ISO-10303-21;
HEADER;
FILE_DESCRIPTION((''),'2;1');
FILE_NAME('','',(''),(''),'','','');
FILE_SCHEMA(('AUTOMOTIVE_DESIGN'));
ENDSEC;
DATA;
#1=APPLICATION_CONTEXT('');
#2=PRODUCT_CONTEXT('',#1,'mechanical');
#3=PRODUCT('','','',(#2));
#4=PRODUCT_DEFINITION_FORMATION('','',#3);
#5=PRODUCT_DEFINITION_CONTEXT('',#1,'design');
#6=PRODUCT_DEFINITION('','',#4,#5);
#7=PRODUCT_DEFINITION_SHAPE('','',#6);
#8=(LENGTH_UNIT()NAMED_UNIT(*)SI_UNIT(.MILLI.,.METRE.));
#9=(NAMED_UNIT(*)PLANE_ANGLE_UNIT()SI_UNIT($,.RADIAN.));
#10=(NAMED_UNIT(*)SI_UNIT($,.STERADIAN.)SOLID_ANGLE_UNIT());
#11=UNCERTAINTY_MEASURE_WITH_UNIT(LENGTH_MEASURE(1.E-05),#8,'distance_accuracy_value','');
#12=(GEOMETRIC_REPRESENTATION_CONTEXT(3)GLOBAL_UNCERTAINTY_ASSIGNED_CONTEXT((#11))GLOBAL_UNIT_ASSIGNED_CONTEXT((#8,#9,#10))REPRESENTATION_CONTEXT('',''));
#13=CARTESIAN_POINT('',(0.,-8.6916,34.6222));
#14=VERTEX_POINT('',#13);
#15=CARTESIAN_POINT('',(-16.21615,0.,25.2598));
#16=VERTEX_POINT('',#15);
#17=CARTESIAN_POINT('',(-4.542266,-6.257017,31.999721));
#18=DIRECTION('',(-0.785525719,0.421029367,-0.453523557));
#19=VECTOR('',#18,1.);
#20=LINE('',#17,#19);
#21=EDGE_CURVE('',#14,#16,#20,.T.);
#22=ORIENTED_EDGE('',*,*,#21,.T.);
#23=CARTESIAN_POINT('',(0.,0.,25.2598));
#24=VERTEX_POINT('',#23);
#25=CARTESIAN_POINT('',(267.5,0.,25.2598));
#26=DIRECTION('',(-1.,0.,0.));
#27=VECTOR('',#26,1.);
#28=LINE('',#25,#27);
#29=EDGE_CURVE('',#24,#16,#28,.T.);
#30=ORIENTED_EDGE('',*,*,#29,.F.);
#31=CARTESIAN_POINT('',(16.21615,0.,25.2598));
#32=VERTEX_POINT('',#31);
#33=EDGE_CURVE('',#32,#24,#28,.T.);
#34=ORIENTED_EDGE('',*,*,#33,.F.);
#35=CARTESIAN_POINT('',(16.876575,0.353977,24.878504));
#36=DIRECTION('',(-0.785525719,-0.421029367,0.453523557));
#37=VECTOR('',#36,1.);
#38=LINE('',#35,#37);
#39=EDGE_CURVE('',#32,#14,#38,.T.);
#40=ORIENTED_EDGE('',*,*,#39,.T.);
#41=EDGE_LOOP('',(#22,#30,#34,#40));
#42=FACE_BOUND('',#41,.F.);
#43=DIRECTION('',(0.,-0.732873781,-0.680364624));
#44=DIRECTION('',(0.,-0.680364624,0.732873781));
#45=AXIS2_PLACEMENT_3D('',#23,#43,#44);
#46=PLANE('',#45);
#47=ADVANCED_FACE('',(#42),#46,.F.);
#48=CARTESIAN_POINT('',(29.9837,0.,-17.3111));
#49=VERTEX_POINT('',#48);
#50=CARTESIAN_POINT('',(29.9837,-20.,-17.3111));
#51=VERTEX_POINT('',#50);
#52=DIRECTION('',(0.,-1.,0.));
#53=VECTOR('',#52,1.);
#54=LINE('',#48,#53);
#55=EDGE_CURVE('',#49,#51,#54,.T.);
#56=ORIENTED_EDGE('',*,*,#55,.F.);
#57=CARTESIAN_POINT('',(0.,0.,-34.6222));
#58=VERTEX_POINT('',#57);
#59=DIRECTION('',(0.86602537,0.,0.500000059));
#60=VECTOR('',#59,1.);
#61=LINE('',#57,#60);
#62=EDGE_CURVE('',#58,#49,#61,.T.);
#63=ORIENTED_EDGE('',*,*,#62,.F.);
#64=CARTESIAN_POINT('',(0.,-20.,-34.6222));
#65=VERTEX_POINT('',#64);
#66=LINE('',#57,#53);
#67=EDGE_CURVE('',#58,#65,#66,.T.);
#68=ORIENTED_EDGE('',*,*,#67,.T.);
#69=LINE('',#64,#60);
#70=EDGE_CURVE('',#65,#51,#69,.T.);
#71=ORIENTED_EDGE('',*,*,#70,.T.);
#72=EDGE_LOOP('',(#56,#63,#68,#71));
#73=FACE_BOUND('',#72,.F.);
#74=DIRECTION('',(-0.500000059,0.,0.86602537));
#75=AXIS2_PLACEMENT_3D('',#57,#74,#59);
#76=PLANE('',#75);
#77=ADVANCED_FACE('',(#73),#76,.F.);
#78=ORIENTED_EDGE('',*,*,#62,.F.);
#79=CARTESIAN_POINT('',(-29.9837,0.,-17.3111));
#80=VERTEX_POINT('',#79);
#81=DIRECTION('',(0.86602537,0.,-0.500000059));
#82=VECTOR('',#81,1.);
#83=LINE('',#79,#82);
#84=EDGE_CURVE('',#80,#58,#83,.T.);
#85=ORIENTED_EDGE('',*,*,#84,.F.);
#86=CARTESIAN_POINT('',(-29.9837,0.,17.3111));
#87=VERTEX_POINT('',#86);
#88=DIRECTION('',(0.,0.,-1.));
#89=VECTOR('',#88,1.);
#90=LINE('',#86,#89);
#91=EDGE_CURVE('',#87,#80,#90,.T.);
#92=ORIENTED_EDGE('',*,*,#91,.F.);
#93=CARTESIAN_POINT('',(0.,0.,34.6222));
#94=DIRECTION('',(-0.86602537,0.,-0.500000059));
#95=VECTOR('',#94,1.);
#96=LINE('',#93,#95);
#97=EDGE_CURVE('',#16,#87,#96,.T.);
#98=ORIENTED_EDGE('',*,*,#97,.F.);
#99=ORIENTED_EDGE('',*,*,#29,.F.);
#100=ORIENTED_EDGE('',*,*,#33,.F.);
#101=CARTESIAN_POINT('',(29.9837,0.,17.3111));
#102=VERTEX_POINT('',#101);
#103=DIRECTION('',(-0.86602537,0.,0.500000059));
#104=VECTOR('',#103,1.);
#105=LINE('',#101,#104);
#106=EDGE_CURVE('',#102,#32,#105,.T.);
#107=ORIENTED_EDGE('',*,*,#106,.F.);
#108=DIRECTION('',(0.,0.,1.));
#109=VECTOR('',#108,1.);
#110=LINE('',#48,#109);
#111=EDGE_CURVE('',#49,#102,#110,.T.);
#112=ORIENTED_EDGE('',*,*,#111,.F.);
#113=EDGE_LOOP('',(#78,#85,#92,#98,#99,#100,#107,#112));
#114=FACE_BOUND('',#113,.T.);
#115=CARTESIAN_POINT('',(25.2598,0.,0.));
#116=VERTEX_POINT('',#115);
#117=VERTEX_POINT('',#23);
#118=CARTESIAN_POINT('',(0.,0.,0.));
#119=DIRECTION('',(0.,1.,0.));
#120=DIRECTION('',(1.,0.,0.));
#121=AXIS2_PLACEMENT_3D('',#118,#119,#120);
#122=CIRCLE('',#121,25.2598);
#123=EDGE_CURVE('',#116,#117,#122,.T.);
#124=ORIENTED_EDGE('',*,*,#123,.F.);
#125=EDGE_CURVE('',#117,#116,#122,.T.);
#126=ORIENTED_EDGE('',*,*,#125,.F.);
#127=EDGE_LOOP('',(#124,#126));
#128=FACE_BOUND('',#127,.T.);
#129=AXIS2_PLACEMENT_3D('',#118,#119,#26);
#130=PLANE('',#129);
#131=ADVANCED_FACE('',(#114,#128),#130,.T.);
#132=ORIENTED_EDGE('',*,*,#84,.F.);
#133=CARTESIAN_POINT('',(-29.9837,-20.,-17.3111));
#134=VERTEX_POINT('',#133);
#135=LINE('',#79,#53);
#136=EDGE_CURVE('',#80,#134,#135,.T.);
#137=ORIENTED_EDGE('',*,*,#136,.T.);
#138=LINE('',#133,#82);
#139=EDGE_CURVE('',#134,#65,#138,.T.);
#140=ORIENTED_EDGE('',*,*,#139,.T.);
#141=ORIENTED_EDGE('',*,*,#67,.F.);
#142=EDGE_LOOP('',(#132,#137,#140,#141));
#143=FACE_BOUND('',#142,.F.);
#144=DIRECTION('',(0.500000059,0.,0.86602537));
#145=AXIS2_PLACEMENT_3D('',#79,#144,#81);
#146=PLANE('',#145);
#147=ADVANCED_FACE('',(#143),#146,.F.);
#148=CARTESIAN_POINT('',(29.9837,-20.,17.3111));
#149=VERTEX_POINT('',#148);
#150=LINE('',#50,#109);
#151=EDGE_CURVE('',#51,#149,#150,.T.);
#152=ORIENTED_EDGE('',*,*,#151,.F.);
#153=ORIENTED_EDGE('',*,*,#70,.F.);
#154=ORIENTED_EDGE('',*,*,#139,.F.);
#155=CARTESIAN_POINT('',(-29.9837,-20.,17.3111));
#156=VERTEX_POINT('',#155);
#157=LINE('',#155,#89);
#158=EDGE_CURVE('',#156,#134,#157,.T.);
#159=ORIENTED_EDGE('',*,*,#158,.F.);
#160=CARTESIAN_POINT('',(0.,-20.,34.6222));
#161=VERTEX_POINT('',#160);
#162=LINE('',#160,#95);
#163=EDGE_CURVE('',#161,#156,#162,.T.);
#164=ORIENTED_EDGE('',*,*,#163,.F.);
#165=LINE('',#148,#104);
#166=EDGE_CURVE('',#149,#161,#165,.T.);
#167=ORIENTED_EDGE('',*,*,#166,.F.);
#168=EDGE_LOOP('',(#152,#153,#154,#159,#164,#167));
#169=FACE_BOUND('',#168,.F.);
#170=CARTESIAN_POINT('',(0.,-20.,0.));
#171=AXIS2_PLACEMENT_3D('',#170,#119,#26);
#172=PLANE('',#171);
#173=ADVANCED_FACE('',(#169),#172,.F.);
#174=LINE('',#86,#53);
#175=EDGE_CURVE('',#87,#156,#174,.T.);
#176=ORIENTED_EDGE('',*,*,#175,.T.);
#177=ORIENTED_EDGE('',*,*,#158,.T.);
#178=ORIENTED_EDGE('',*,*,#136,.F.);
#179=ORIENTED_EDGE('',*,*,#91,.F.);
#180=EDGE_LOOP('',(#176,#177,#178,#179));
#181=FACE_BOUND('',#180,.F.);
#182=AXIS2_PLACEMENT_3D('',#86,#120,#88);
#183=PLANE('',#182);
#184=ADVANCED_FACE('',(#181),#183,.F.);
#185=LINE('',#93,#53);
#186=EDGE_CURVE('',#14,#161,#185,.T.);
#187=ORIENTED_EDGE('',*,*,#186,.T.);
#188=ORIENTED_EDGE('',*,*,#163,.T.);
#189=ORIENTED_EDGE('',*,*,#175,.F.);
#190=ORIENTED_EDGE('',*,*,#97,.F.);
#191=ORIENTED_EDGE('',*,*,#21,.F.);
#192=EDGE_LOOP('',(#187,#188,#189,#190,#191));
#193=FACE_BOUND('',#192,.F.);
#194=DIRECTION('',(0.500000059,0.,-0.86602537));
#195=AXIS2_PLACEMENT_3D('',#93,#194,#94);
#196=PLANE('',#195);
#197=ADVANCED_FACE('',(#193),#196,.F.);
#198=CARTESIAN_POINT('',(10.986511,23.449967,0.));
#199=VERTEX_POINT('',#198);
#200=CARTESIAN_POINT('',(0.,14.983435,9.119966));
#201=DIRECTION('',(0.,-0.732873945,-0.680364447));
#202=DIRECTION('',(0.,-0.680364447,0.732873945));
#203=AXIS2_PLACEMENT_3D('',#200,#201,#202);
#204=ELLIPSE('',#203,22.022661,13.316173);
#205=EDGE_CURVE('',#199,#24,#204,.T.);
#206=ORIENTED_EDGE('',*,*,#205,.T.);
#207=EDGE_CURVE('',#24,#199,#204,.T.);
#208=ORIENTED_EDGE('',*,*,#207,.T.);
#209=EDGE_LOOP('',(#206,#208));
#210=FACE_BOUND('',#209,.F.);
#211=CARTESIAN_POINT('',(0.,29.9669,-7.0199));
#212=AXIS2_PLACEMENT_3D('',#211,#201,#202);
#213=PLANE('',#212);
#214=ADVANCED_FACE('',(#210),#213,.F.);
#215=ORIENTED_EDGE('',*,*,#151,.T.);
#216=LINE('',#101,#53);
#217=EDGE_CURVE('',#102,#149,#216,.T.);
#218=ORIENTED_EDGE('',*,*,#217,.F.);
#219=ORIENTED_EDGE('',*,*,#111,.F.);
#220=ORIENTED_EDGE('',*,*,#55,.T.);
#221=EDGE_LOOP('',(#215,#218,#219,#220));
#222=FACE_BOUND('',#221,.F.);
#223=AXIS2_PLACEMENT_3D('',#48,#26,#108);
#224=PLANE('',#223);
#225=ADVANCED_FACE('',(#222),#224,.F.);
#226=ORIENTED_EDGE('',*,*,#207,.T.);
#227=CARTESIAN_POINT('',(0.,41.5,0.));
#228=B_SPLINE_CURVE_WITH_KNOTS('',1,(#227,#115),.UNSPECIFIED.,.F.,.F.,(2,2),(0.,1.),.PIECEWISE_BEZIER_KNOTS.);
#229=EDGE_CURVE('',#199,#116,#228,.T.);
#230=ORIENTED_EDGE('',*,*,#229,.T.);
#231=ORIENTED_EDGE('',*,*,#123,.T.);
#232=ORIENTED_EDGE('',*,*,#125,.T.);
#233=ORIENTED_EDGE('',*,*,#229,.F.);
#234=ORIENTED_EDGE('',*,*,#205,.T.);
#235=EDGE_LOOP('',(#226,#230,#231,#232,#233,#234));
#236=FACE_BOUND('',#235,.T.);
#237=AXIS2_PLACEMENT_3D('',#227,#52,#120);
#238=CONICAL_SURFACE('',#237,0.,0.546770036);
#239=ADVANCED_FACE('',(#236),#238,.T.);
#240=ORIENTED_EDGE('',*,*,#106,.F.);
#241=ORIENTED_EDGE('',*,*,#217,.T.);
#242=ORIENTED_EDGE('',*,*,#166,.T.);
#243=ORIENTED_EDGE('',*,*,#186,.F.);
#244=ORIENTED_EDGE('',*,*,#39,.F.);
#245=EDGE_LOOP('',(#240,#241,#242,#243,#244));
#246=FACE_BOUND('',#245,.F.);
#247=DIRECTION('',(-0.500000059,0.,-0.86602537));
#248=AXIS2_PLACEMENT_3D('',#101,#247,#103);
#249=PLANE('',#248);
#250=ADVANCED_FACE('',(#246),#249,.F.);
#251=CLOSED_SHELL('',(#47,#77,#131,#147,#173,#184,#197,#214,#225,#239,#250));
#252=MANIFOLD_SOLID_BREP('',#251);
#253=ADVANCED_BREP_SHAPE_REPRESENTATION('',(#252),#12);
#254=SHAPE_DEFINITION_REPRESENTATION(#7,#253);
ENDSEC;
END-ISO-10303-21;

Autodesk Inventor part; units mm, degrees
ref_plane "YZ Plane" through (0, 0, 0) normal (1, 0, 0) x (0, 1, 0)
ref_plane "XZ Plane" through (0, 0, 0) normal (0, 1, 0) x (-1, 0, 0)
sketch "Эскиз1" plane through (0, 0, 0) normal (0, 1, 0) x (-1, 0, 0)
  line L0 (0, -34.6222) -> (-29.9837, -17.3111)
  line L1 (-29.9837, -17.3111) -> (-29.9837, 17.3111)
  line L2 (-29.9837, 17.3111) -> (0, 34.6222)
  line L3 (0, 34.6222) -> (29.9837, 17.3111)
  line L4 (29.9837, 17.3111) -> (29.9837, -17.3111)
  line L5 (29.9837, -17.3111) -> (0, -34.6222)
  point P0 (0, 0)
  point P1 (0, 0)
extrude "Выдавливание1" add sketch "Эскиз1" against normal blind 20
sketch "Эскиз2" plane through (0, 0, 0) normal (0, 1, 0) x (1, 0, 0)
  circle A0 centre (0, 0) radius 25.2598
ref_plane "РабПлоскость2" through (0, 41.5, 0) normal (0, 1, 0) x (1, 0, 0)
sketch "Эскиз3" plane through (0, 41.5, 0) normal (0, 1, 0) x (1, 0, 0)
  point P0 (0, 0)
  point P1 (0, 0)
loft "Лофт1" add profiles "Эскиз2" section 1 point at (0, 41.5, 0)
sketch "Эскиз4" plane through (0, 0, 0) normal (1, 0, 0) x (0, 1, 0)
  line L0 (-20, 17.3111) -> (-20, -17.3111) projected
  line L1 (0, -25.2598) -> (41.5, 0) projected
  line L2 (29.9669, -7.0199) -> (0, 25.2598)
  line L3 (0, 25.2598) -> (41.5, 0) projected
  line L4 (0, 25.2598) -> (-8.6916, 34.6222)
  line L5 (0, 17.3111) -> (0, 34.6222) projected
  line L6 (-8.6916, 34.6222) -> (0, 34.6222)
  line L7 (0, 34.6222) -> (29.9669, 34.6222)
  line L8 (29.9669, 34.6222) -> (52.4176, 17.3111)
  line L9 (52.4176, 17.3111) -> (52.4176, -10.8837)
  arc A0 (29.9669, -7.0199) -> (52.4176, -10.8837) centre (52.4176, 56.2726) ccw
  point P0 (0, 0)
extrude "Выдавливание2" cut sketch "Эскиз4" along normal mid plane 535
properties part number "Санёк"
